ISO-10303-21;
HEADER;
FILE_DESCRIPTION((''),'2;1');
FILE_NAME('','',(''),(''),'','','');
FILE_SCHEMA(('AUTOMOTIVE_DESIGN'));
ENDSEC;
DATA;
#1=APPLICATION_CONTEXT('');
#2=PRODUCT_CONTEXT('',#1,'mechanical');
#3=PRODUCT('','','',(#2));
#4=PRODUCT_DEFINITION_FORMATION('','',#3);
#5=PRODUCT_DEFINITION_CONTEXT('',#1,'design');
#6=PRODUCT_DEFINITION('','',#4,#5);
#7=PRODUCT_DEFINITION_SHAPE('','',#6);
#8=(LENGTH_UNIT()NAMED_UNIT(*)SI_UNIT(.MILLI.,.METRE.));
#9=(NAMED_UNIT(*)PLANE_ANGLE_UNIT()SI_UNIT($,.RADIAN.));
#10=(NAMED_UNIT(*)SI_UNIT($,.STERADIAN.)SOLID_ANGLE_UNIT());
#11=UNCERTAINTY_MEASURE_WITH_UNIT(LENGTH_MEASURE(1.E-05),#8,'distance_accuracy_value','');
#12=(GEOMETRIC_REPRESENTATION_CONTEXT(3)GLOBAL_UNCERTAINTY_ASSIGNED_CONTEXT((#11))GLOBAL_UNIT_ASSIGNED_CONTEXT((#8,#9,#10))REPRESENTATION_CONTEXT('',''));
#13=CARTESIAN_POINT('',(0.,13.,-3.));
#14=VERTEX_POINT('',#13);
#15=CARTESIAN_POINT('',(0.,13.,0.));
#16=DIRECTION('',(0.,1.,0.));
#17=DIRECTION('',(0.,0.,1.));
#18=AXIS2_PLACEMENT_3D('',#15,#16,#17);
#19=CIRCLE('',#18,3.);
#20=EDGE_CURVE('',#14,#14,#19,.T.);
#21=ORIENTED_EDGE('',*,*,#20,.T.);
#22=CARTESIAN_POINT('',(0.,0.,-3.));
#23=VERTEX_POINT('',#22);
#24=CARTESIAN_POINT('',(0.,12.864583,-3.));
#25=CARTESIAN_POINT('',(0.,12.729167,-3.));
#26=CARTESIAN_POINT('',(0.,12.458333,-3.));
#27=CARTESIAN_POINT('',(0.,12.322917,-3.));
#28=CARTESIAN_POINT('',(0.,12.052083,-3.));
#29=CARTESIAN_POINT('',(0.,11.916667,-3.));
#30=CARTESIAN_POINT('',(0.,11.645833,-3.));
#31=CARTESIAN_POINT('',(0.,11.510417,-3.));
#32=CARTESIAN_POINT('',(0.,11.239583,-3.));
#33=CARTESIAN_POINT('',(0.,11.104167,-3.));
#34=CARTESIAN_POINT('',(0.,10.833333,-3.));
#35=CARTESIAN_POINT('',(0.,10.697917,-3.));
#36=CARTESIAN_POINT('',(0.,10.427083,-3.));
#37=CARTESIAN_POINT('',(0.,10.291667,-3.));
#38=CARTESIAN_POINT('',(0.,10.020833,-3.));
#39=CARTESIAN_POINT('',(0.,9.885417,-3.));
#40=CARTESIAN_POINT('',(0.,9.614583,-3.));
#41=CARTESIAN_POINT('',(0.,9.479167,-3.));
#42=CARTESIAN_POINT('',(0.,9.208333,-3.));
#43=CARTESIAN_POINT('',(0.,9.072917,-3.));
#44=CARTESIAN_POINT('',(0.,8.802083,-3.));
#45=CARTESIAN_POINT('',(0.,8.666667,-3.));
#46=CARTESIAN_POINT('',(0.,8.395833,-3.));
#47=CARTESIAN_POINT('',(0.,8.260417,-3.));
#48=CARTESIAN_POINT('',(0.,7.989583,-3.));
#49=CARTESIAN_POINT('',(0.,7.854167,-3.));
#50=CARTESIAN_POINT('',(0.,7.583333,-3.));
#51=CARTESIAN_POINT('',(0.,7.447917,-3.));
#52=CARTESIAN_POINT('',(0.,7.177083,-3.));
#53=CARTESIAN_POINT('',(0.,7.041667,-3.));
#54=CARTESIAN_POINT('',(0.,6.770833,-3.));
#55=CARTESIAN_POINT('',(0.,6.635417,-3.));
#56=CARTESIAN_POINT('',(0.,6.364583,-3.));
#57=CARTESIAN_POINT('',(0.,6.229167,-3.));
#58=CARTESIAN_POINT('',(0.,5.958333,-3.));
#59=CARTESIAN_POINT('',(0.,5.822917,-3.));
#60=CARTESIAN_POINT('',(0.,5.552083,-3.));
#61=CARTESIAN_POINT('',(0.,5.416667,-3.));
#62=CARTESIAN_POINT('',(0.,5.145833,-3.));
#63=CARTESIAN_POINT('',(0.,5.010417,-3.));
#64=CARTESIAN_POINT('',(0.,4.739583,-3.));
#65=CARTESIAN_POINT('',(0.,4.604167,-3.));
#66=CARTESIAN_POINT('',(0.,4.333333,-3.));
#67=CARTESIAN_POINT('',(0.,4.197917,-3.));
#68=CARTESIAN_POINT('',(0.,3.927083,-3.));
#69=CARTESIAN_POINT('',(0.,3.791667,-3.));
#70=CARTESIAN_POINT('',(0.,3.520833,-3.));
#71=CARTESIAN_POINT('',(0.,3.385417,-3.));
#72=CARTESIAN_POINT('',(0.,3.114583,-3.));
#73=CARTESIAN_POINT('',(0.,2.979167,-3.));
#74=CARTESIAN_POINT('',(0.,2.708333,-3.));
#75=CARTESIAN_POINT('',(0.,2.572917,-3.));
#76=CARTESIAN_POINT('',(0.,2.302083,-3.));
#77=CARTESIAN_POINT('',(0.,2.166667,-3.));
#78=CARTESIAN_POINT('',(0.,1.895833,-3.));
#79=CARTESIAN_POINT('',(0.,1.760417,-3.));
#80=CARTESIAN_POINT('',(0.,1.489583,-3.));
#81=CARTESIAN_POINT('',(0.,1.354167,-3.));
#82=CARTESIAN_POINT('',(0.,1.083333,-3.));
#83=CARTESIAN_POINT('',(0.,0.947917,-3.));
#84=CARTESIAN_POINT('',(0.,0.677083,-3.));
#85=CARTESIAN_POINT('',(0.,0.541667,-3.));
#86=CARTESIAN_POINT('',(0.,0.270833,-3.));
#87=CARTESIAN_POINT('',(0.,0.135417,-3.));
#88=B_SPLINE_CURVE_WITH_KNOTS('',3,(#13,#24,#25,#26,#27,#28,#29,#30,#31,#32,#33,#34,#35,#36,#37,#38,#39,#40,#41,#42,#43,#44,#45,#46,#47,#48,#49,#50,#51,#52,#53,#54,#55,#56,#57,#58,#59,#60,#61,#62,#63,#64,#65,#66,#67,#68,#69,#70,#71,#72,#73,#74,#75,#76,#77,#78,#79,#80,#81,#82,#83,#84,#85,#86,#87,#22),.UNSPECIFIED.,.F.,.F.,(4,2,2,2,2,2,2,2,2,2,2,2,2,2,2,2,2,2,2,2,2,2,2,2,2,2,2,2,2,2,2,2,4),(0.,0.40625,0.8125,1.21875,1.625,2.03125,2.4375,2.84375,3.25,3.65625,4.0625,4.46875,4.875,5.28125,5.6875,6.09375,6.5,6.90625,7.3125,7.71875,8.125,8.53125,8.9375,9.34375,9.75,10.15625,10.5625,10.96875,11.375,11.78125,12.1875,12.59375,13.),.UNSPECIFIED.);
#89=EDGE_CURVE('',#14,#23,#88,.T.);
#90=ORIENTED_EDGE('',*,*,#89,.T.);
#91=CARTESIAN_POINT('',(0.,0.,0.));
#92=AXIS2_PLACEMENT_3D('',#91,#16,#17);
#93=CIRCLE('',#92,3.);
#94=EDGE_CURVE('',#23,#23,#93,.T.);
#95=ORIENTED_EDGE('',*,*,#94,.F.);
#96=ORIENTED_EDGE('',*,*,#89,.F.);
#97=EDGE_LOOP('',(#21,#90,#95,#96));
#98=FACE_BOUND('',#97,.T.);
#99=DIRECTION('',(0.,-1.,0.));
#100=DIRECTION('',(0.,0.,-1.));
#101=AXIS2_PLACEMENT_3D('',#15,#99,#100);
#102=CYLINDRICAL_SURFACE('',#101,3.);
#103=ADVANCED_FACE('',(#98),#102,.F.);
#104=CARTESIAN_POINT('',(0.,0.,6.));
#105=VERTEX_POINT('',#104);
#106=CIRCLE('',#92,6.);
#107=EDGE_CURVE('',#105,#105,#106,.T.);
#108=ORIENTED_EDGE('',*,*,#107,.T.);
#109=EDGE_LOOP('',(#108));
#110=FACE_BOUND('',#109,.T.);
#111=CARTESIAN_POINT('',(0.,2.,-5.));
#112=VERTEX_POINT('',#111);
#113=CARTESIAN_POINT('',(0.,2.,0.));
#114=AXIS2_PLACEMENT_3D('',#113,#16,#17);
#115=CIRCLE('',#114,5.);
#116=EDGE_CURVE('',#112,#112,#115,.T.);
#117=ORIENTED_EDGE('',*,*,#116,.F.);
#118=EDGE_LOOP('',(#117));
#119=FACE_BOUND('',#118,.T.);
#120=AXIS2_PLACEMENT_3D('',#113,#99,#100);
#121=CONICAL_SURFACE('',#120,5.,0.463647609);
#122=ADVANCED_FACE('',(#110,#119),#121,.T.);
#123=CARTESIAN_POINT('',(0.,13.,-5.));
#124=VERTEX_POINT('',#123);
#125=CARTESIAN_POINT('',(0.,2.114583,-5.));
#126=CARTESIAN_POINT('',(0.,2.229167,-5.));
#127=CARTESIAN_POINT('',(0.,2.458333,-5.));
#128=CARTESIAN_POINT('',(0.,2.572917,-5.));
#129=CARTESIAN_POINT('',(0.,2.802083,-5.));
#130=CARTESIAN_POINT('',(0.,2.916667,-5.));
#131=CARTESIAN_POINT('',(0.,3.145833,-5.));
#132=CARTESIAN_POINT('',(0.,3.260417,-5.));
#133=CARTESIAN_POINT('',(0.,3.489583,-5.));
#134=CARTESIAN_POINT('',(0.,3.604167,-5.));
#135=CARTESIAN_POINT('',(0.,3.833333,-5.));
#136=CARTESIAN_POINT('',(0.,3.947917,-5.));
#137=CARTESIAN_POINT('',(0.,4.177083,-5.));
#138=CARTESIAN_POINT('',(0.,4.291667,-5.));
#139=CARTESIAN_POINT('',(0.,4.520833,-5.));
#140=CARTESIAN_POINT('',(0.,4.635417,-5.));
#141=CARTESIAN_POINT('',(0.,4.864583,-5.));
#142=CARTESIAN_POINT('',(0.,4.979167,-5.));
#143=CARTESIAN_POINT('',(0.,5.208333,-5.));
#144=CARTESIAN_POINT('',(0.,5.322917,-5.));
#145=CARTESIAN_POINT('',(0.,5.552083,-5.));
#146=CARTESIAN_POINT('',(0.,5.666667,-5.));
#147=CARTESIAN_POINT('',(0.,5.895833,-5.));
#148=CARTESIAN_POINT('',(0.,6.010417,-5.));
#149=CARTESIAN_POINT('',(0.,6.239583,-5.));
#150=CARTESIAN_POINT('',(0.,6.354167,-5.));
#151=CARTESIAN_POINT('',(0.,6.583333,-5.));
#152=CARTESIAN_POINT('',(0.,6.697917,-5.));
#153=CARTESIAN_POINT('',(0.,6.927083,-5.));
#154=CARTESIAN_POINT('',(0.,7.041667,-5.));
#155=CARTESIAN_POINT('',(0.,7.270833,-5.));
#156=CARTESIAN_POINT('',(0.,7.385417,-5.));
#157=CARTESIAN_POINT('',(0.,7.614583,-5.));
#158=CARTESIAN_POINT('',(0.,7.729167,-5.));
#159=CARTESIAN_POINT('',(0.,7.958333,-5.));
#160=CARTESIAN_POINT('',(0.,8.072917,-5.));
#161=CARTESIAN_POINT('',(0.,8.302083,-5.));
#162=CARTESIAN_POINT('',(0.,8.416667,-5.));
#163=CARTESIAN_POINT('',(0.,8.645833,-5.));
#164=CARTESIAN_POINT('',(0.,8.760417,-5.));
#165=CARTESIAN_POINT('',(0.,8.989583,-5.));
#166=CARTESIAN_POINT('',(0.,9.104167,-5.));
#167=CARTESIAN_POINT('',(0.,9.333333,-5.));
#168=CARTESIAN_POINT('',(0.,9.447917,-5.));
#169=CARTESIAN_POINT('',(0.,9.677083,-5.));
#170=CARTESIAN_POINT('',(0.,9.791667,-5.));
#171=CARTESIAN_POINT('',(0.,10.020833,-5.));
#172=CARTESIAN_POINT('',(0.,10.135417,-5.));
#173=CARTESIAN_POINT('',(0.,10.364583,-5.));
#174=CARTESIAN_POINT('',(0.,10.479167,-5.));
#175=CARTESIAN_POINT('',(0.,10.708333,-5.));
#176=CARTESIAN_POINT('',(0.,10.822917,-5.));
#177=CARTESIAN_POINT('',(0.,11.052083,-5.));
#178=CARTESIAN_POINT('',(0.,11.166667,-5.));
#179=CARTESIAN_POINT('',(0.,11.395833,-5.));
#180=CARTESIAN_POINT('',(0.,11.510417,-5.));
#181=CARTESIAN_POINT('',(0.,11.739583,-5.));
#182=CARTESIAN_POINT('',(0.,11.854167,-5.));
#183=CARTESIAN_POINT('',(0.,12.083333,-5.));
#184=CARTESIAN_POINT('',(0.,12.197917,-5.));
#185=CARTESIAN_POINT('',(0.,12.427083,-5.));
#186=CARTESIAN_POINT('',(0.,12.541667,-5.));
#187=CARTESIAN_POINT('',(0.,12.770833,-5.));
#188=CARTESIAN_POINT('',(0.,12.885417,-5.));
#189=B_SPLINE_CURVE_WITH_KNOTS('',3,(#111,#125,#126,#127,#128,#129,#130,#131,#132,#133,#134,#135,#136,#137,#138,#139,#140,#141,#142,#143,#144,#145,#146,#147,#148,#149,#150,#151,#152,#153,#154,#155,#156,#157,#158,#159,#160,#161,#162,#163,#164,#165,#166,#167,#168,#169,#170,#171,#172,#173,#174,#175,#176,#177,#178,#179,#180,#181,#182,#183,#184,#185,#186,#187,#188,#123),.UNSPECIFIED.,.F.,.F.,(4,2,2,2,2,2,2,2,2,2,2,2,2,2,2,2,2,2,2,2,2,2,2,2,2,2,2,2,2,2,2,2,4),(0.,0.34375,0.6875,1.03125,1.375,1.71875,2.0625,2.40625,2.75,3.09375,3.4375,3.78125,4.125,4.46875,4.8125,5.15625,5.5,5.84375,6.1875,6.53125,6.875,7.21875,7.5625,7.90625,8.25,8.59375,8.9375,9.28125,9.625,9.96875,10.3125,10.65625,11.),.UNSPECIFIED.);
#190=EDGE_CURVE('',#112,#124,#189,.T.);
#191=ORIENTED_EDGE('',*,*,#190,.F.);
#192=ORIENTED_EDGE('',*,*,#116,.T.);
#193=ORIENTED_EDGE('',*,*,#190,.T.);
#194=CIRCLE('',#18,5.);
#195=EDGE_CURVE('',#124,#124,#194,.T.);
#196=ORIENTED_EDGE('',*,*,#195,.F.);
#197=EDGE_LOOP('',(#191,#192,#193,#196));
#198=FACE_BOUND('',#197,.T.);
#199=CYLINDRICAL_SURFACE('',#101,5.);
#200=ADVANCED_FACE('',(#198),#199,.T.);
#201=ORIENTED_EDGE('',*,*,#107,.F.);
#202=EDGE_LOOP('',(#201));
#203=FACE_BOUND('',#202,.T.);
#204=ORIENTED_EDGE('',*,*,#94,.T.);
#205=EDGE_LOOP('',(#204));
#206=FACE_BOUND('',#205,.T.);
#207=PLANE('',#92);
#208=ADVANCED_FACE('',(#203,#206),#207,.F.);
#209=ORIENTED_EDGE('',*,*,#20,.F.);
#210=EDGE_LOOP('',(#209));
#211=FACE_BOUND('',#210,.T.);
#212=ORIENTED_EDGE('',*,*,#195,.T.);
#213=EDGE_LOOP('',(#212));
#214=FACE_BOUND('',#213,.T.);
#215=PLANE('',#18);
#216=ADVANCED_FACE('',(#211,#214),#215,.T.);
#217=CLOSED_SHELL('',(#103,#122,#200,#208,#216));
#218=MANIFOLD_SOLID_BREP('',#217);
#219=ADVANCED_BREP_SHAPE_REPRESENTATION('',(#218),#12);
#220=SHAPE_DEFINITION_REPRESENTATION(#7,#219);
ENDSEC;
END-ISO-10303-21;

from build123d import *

# Parameters (mm, degrees)
SKETCH_1_R       = 5
SKETCH_1_R_2     = 3
EXTRUDE_1_DEPTH  = 13
SKETCH_1_3_R     = 6
SKETCH_1_3_R_2   = 5
EXTRUDE_2_DEPTH  = 2
CHAMFER_1_SIZE   = 1
CHAMFER_1_SIZE_2 = 2


with BuildPart() as part:
    # 草图1 → 凸台-拉伸1 (new body)
    with BuildSketch(Plane(origin=(0, 0, 0), x_dir=(1, 0, 0), z_dir=(0, 1, 0))):
        with Locations(Location((0, 0, 0), (0, 0, 90))):
            Circle(SKETCH_1_R)
        with Locations(Location((0, 0, 0), (0, 0, 90))):
            Circle(SKETCH_1_R_2, mode=Mode.SUBTRACT)
    extrude(amount=EXTRUDE_1_DEPTH)

    # 草图1<3> → 凸台-拉伸2 (add)
    with BuildSketch(Plane(origin=(0, 0, 0), x_dir=(1, 0, 0), z_dir=(0, 1, 0))):
        with Locations(Location((0, 0, 0), (0, 0, 270))):
            Circle(SKETCH_1_3_R)
        with Locations(Location((0, 0, 0), (0, 0, 90))):
            Circle(SKETCH_1_3_R_2, mode=Mode.SUBTRACT)
    extrude(amount=EXTRUDE_2_DEPTH)

    # 倒角1
    # the kernel refuses this chamfer: 2, 1 mm, written as the material it takes off along each edge
    with BuildSketch(Plane(origin=(0, 2, 0), x_dir=(0, 0, 1), z_dir=(-1, 0, 0))) as chamfer_1_piece_1:
        Polygon((6 - CHAMFER_1_SIZE, 0), (6, -CHAMFER_1_SIZE_2), (6, 0), align=None)
    revolve(axis=Axis((0, 2, 0), (0, 1, 0)), mode=Mode.SUBTRACT)


solid = part.part
